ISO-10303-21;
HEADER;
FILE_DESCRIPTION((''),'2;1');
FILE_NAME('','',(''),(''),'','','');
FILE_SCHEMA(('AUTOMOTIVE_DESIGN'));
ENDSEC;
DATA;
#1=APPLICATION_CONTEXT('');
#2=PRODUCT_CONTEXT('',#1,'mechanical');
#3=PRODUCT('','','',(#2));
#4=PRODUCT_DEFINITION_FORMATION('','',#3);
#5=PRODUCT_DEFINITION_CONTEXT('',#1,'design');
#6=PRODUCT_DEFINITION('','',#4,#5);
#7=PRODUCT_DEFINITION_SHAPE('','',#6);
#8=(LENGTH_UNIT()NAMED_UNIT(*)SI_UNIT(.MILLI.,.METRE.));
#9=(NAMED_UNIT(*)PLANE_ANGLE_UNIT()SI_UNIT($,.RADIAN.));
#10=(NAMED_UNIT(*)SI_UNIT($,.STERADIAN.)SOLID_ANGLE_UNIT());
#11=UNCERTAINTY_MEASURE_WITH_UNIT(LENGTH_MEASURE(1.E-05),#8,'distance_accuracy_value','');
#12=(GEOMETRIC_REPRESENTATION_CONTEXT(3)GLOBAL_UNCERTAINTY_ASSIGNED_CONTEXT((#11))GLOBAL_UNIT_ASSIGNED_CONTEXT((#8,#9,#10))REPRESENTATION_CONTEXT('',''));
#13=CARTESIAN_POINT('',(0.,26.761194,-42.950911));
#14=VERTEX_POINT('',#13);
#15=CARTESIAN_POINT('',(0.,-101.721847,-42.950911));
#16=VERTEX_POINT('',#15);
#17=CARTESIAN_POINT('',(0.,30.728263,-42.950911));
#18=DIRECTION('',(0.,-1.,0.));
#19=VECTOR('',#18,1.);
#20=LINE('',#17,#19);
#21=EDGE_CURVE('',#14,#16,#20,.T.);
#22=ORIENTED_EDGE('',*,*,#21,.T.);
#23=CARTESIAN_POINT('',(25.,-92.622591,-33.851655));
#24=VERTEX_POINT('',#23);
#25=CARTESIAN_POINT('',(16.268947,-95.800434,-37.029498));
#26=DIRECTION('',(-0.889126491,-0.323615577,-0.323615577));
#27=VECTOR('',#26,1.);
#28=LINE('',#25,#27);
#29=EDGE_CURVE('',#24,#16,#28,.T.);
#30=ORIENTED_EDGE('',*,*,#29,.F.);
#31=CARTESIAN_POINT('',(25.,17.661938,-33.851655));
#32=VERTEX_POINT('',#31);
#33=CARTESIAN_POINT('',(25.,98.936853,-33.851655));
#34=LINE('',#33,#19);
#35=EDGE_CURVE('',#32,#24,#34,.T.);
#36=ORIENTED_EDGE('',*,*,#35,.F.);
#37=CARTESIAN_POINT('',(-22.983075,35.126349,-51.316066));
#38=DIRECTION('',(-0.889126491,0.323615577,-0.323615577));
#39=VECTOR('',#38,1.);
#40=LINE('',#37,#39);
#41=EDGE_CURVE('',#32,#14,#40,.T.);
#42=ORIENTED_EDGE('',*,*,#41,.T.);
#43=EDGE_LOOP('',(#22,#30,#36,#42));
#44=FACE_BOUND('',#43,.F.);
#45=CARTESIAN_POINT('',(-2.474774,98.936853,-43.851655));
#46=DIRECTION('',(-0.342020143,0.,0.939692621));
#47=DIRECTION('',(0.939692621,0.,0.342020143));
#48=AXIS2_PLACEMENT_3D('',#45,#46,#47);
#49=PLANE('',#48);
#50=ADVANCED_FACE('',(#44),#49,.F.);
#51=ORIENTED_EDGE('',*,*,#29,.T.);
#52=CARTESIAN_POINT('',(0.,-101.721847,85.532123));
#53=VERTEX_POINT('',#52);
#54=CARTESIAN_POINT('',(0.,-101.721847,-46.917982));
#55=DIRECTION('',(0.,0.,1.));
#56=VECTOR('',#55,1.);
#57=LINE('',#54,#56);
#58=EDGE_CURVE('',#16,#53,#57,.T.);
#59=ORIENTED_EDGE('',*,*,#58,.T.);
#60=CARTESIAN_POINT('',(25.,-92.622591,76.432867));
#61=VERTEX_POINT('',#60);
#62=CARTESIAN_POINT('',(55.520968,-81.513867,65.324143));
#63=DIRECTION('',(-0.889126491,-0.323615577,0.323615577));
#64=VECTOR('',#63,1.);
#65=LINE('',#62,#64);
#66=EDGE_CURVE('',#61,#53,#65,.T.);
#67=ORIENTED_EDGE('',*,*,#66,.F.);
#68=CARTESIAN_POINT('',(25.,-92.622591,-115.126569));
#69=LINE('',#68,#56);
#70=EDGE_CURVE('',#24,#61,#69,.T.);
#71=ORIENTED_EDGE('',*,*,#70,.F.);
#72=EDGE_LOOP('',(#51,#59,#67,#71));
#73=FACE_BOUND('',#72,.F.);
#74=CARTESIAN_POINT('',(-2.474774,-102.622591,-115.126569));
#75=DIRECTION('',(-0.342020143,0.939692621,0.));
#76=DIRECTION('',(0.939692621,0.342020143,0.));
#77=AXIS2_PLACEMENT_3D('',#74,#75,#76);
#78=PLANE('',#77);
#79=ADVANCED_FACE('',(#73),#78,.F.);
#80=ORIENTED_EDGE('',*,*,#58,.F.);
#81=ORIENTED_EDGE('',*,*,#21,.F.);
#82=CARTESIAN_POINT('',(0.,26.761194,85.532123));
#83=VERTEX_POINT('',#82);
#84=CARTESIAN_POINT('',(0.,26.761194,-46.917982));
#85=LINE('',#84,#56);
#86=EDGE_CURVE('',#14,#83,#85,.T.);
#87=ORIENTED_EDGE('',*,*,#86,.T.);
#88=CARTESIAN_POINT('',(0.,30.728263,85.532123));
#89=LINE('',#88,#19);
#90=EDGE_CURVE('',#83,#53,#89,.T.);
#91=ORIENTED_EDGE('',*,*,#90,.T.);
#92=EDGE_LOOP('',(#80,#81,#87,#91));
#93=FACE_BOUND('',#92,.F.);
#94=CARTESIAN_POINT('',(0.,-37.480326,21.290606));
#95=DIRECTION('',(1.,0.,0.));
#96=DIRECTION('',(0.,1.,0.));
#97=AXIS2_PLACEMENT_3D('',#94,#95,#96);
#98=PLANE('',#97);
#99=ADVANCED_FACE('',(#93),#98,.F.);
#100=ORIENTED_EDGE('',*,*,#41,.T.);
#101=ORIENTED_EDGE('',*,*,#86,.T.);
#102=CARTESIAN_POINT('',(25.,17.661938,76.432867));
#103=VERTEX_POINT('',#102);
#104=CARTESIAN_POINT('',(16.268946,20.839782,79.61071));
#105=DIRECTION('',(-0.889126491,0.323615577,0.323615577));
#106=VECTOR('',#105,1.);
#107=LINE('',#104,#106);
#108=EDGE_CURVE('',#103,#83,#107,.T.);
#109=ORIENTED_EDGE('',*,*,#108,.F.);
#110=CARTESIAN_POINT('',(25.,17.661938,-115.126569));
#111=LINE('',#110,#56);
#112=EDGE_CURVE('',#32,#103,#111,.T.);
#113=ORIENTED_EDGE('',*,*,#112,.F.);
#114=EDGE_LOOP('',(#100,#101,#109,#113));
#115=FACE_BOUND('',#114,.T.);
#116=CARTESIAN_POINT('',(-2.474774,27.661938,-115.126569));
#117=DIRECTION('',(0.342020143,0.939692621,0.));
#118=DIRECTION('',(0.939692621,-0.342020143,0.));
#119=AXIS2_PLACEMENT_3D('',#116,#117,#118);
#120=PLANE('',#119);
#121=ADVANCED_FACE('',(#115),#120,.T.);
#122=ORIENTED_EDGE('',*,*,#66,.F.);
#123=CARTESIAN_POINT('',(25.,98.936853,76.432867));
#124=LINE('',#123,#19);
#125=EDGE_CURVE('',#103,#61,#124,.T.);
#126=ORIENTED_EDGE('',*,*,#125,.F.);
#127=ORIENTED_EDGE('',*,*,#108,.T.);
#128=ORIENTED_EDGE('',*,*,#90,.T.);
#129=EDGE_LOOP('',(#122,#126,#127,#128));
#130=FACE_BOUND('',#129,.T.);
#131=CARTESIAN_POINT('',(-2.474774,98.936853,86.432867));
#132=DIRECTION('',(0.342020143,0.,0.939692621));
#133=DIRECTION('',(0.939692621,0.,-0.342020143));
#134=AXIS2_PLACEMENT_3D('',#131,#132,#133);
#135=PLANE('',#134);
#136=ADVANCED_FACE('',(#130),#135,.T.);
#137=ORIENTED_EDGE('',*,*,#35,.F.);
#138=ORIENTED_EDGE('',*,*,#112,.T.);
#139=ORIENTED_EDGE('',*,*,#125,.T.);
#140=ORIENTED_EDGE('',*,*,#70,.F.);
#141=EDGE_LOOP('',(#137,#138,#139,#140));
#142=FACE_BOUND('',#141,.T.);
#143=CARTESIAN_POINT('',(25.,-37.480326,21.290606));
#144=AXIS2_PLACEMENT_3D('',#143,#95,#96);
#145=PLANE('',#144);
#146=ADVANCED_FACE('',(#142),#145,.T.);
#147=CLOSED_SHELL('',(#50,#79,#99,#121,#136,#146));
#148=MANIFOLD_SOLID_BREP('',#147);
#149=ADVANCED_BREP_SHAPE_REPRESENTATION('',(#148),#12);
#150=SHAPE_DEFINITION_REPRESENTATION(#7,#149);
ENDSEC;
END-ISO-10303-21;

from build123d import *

# Parameters (mm, degrees)
F0_W        = 130.2845291793
F0_H        = 130.2845217288
F1_DEPTH    = 25
F2_T1_DEPTH = 272.8343581663
F2_T3_DEPTH = 272.8343507158


# Not quite as in the source:
# - a fillet or chamfer that OpenCascade refuses, or shapes differently, is made with other operations: its cross-section is extruded or revolved along the edge and cut away or added


with BuildPart() as f1:
    # F0 (on Right) → F1 (new body)
    with BuildSketch(Plane.YZ):
        with Locations((-37.4803263694, 21.2906058878)):
            Rectangle(F0_W, F0_H)
    extrude(amount=F1_DEPTH)

    # F2: chamfer of 10 x 27.4747741945 on 4 edges, made by hand

    # F2_s2 → F2_t1 (cut)
    with BuildSketch(Plane.XZ.offset(-98.9368527138)):
        Polygon((-2.4747741945, -43.8516549766), (25, -33.8516549766), (25, -43.8516549766), align=None)
        Polygon((-2.4747741945, 86.4328667521), (25, 76.4328667521), (25, 86.4328667521), align=None)
    extrude(amount=F2_T1_DEPTH, mode=Mode.SUBTRACT)

    # F2_s4 → F2_t3 (cut)
    with BuildSketch(Plane.XY.offset(-115.1265694701)):
        Polygon((-2.4747741945, -102.6225909591), (25, -92.6225909591), (25, -102.6225909591), align=None)
        Polygon((-2.4747741945, 27.6619382203), (25, 17.6619382203), (25, 27.6619382203), align=None)
    extrude(amount=F2_T3_DEPTH, mode=Mode.SUBTRACT)


solid = f1.part
